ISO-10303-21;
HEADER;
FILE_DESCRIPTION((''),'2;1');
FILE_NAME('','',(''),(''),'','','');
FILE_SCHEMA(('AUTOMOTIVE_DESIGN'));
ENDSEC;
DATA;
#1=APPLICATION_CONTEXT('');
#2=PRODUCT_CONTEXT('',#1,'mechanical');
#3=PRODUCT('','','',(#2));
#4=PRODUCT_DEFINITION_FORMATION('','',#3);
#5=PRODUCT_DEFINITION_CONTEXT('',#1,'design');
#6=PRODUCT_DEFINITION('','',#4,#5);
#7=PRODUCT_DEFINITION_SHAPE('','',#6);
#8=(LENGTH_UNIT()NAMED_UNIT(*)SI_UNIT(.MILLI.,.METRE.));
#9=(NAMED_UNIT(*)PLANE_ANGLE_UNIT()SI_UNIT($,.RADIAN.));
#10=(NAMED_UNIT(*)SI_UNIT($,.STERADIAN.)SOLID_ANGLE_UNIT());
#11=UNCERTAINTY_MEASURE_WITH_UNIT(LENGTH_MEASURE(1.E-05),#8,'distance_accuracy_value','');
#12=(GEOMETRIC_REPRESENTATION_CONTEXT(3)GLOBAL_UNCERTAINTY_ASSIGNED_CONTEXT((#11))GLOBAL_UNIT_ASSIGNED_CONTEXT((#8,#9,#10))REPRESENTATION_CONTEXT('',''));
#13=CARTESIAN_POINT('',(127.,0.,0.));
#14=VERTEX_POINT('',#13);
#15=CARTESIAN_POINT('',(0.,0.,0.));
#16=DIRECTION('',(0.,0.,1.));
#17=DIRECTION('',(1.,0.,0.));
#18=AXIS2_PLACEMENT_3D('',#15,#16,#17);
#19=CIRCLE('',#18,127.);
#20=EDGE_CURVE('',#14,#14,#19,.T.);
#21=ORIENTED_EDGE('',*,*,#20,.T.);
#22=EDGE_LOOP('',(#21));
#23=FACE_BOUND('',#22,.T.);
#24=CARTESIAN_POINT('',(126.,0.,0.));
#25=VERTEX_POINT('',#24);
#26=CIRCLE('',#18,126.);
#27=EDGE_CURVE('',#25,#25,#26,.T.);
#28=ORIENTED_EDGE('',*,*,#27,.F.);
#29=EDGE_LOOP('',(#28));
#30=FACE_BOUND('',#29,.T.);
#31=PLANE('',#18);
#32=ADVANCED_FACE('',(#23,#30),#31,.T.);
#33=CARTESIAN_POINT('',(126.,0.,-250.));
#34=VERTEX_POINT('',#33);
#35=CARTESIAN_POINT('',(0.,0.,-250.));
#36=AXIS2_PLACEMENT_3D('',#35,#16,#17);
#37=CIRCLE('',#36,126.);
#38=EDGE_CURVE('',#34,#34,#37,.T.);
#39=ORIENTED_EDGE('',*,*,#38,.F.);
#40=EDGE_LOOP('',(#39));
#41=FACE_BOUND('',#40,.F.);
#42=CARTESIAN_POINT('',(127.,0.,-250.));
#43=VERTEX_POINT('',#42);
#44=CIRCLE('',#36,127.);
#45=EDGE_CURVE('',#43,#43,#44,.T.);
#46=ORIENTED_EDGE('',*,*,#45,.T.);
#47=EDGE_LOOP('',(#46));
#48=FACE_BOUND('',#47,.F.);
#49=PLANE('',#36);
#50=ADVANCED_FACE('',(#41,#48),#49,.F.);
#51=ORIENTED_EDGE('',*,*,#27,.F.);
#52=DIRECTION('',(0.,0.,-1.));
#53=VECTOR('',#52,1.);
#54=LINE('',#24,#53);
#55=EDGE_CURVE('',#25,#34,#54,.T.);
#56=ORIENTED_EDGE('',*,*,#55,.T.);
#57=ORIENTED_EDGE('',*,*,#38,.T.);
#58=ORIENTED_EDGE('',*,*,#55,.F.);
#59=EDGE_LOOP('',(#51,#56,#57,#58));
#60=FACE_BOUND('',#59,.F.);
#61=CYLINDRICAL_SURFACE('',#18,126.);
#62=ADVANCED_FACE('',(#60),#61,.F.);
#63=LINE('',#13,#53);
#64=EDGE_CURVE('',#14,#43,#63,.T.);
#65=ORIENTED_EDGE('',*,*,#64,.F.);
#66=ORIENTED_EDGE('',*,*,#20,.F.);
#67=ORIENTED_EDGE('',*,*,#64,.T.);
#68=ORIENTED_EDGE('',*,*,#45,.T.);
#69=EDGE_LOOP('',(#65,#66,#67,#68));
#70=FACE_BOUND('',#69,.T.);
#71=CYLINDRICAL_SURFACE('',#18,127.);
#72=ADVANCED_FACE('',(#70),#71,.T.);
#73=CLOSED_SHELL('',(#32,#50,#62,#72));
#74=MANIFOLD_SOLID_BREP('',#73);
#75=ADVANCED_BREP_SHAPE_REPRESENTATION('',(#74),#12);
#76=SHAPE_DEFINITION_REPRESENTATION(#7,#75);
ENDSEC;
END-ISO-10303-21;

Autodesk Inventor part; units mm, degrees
ref_plane "YZ Plane" through (0, 0, 0) normal (1, 0, 0) x (0, 1, 0)
ref_plane "XZ Plane" through (0, 0, 0) normal (0, 1, 0) x (-1, 0, 0)
ref_plane "Work Plane1" through (0, 0, 0) normal (0, 0, 1) x (1, 0, 0)
sketch "Sketch1" plane through (0, 0, 0) normal (0, 0, 1) x (1, 0, 0)
  circle A0 centre (0, 0) radius 127
  dimension "d0" = 254
surface extrude "ExtrusionSrf1" sketch "Sketch1" against normal blind 250 shown no curves A0
thicken "Thicken1" operation new thickness 1 both sides no extend neighbours no toward (-0.996629, 0.0820408, 0) faces at (126.5719, -10.4192, -166.6667)
properties part number "borewell max size"
